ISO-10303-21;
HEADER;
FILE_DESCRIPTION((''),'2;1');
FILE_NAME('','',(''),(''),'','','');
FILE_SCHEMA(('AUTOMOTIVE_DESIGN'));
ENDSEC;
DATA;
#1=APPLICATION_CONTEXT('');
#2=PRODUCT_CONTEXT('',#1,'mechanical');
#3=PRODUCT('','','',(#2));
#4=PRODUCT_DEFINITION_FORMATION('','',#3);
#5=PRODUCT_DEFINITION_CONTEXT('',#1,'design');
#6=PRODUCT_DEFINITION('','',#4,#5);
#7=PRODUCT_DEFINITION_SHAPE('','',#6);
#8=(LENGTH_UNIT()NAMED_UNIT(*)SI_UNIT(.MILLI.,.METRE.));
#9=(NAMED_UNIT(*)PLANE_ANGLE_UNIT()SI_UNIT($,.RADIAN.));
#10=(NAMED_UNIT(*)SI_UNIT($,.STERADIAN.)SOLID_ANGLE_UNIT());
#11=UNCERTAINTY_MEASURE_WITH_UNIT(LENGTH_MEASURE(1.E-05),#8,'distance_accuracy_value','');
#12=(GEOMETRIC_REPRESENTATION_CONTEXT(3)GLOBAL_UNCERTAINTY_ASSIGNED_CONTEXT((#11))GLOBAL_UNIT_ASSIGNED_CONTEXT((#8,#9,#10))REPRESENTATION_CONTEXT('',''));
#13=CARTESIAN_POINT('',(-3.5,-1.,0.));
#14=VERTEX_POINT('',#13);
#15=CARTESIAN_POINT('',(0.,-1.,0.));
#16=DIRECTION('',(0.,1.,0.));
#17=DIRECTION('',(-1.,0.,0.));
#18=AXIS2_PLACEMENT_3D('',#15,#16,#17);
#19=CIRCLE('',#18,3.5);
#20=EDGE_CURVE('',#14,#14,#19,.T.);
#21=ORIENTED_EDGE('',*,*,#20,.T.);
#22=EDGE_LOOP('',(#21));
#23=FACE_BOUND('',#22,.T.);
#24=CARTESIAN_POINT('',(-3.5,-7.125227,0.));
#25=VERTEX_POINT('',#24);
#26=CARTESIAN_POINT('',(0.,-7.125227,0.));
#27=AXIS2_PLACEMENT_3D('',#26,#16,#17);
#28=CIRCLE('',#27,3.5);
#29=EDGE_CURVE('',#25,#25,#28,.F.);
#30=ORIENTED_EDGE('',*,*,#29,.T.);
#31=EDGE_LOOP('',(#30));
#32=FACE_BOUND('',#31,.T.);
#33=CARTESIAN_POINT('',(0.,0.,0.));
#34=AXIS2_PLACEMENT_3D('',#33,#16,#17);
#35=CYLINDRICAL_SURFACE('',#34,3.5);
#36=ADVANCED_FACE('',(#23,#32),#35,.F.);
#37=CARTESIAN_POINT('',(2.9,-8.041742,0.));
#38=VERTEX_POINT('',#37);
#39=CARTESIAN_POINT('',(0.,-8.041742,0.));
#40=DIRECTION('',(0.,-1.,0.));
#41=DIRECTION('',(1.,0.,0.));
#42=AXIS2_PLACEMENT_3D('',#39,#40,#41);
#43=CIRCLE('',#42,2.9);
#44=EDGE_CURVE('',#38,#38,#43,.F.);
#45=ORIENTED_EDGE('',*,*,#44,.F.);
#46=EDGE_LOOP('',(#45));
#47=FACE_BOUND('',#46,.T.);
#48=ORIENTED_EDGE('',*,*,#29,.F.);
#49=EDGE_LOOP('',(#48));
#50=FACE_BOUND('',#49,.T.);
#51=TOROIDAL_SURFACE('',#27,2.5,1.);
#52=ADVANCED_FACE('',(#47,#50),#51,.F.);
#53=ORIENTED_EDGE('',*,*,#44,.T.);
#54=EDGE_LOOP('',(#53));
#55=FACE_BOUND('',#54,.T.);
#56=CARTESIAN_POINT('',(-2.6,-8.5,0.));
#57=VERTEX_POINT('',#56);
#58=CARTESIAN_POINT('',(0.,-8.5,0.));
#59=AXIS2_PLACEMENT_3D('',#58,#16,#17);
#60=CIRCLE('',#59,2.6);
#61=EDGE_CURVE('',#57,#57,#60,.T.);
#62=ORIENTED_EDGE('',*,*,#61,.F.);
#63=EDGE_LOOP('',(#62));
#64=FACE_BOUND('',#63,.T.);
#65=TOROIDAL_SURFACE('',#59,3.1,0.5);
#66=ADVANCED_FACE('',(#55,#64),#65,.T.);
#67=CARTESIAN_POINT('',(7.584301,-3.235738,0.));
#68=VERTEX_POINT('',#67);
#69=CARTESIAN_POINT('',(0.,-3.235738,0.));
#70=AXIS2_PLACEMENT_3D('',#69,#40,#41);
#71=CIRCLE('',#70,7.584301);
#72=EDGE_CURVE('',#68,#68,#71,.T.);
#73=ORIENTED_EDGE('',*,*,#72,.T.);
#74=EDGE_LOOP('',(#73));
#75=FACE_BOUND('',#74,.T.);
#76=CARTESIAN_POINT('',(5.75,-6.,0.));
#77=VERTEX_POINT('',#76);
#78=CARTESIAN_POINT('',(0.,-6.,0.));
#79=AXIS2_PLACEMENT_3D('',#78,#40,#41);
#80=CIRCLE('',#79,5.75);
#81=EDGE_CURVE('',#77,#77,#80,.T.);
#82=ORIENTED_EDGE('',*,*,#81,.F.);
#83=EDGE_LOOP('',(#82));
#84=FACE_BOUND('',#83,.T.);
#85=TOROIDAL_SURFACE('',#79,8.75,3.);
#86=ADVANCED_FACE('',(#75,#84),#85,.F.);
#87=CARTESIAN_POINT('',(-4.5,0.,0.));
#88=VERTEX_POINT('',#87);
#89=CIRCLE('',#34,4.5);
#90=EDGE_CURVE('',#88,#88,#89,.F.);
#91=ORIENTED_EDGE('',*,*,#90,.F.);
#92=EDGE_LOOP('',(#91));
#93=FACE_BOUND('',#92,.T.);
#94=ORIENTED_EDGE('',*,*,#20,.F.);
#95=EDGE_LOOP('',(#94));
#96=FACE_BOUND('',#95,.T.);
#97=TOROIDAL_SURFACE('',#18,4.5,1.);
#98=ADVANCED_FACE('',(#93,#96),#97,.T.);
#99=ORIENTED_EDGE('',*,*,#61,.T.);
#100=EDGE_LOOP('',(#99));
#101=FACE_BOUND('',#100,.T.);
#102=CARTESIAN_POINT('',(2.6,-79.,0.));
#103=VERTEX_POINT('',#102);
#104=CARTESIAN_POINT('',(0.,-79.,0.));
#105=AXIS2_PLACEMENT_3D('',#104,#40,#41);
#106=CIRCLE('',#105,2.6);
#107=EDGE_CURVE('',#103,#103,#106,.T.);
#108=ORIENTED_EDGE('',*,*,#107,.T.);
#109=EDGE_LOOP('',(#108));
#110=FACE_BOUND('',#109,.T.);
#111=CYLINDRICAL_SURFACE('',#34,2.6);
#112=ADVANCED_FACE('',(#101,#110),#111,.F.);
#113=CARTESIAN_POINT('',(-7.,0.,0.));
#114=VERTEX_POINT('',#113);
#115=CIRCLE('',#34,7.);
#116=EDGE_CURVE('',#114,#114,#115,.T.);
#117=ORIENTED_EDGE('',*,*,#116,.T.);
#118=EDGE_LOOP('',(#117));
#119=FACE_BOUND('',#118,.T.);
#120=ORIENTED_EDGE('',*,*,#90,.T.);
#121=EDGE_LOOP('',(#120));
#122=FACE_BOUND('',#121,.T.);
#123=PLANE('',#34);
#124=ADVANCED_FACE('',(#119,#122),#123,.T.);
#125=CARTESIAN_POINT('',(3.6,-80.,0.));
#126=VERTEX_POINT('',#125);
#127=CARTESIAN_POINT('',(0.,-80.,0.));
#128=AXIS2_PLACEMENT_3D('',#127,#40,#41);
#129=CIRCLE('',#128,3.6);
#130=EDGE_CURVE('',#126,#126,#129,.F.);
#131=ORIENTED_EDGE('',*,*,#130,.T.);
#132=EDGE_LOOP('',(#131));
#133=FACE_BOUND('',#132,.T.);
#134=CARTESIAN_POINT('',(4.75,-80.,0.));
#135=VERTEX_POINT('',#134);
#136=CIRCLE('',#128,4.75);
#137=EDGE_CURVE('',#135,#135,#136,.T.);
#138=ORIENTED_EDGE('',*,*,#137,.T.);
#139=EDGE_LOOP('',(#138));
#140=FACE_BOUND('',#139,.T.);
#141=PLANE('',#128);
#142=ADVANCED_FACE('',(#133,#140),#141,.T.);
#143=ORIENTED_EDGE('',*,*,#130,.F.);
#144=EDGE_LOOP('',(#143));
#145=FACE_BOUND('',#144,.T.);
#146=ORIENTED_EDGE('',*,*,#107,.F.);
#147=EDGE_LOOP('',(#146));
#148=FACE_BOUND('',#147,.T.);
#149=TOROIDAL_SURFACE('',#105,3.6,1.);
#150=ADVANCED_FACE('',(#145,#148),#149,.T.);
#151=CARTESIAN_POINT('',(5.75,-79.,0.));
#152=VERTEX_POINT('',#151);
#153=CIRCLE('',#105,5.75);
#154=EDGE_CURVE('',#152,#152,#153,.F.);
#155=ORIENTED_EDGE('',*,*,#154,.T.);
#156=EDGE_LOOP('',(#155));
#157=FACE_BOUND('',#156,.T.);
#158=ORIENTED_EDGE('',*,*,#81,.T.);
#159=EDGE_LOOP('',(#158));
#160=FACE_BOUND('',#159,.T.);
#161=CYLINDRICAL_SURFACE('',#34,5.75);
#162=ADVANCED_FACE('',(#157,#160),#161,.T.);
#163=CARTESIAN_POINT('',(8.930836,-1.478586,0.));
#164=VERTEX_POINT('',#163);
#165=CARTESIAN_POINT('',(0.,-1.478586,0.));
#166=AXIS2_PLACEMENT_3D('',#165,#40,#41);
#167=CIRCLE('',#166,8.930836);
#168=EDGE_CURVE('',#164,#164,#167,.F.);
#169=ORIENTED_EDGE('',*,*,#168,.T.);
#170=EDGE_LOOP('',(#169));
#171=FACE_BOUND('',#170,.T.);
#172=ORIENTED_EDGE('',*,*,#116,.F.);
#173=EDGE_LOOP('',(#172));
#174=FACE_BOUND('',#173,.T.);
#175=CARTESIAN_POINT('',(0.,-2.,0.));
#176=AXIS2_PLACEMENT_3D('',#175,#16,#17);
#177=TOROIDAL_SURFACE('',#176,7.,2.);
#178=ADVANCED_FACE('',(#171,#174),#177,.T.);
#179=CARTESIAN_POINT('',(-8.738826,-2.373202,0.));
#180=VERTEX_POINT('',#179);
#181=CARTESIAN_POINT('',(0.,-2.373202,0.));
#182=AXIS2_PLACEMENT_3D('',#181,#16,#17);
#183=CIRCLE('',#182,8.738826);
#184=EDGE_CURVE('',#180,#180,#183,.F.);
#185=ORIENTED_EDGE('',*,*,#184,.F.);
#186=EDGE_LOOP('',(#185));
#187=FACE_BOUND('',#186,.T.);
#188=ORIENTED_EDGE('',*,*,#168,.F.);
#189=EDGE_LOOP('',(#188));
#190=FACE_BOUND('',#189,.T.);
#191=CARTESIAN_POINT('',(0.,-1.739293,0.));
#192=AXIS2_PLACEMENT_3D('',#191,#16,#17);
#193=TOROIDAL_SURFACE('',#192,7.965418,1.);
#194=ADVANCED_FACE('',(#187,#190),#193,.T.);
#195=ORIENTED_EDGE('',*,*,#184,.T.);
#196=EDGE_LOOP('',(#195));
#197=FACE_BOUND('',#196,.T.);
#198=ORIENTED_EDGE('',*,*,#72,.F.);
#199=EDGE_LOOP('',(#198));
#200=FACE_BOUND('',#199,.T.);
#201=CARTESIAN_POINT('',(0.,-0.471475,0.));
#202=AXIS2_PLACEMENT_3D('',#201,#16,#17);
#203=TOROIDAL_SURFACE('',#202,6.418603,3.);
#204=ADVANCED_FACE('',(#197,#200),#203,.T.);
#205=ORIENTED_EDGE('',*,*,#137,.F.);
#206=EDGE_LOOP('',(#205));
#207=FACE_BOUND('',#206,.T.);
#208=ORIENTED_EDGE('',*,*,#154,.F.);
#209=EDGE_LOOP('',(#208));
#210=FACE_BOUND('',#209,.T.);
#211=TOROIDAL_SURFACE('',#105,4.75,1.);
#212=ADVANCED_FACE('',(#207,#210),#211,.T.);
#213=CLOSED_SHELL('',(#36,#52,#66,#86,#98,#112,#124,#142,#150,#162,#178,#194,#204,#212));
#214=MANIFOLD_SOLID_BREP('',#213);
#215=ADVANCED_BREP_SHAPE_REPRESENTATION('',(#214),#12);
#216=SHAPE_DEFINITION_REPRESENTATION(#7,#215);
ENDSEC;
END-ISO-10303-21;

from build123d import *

# Parameters (mm, degrees)
FILLET1_R  = 3
FILLET3_R  = 2
FILLET4_R  = 1
FILLET7_R  = 0.5
FILLET9_R  = 1
FILLET10_R = 1
FILLET11_R = 3
FILLET12_R = 1
FILLET13_R = 1


with BuildPart() as part:
    # Sketch1 → Revolve1 (revolve)
    with BuildSketch(Plane.XY, mode=Mode.PRIVATE) as revolve1_sk:
        Polygon((9, 0), (3.5, 0), (3.5, -8), (2.6, -8), (2.6, -80), (5.75, -80), (5.75, -3), (9, -3), align=None)
    revolve(revolve1_sk.sketch.rotate(Axis((0, 0, 0), (0, -1, 0)), 180), axis=Axis((0, 0, 0), (0, -1, 0)))

    # Fillet1
    fillet1_edges = [part.edges().sort_by_distance(p)[0] for p in [
        (5.75, -3, 0),
    ]]
    fillet(fillet1_edges, radius=FILLET1_R)

    # Fillet3
    fillet3_edges = [part.edges().sort_by_distance(p)[0] for p in [
        (9, 0, 0),
    ]]
    fillet(fillet3_edges, radius=FILLET3_R)

    # Fillet4
    fillet4_edges = [part.edges().sort_by_distance(p)[0] for p in [
        (3.5, 0, 0),
    ]]
    fillet(fillet4_edges, radius=FILLET4_R)

    # Fillet7
    fillet7_edges = [part.edges().sort_by_distance(p)[0] for p in [
        (2.6, -8, 0),
    ]]
    fillet(fillet7_edges, radius=FILLET7_R)

    # Fillet9
    fillet9_edges = [part.edges().sort_by_distance(p)[0] for p in [
        (2.6, -80, 0),
    ]]
    fillet(fillet9_edges, radius=FILLET9_R)

    # Fillet10
    fillet10_edges = [part.edges().sort_by_distance(p)[0] for p in [
        (5.75, -80, 0),
    ]]
    fillet(fillet10_edges, radius=FILLET10_R)

    # Fillet11
    # the kernel refuses this fillet: 3 mm, written as the material it takes off along each edge
    with BuildSketch(Plane(origin=(0, -3, 0), x_dir=(-1, 0, 0), z_dir=(0, 0, 1))) as fillet11_piece_1:
        with BuildLine():
            CenterArc((6.418602734, -2.528524829), FILLET11_R, 30.631081829, 36.503603927)
            Line((9, -1), (9.258139727, -0.847147517))
            ThreePointArc((9.258139727, -0.847147517), (9.3, -0.5), (9.3, 0))
            Line((9.3, 0), (9, 0.3))
            ThreePointArc((9, 0.3), (8.75, 0.3), (7.70087123, 0.512163827))
            Line((7.70087123, 0.512163827), (7.584301367, 0.235737585))
        make_face()
    revolve(axis=Axis((0, -3, 0), (0, -1, 0)), mode=Mode.SUBTRACT)

    # Fillet12
    fillet12_edges = [part.edges().sort_by_distance(p)[0] for p in [
        (9, -2, 0),
    ]]
    fillet(fillet12_edges, radius=FILLET12_R)

    # Fillet13
    fillet13_edges = [part.edges().sort_by_distance(p)[0] for p in [
        (3.5, -8, 0),
    ]]
    fillet(fillet13_edges, radius=FILLET13_R)


solid = part.part
